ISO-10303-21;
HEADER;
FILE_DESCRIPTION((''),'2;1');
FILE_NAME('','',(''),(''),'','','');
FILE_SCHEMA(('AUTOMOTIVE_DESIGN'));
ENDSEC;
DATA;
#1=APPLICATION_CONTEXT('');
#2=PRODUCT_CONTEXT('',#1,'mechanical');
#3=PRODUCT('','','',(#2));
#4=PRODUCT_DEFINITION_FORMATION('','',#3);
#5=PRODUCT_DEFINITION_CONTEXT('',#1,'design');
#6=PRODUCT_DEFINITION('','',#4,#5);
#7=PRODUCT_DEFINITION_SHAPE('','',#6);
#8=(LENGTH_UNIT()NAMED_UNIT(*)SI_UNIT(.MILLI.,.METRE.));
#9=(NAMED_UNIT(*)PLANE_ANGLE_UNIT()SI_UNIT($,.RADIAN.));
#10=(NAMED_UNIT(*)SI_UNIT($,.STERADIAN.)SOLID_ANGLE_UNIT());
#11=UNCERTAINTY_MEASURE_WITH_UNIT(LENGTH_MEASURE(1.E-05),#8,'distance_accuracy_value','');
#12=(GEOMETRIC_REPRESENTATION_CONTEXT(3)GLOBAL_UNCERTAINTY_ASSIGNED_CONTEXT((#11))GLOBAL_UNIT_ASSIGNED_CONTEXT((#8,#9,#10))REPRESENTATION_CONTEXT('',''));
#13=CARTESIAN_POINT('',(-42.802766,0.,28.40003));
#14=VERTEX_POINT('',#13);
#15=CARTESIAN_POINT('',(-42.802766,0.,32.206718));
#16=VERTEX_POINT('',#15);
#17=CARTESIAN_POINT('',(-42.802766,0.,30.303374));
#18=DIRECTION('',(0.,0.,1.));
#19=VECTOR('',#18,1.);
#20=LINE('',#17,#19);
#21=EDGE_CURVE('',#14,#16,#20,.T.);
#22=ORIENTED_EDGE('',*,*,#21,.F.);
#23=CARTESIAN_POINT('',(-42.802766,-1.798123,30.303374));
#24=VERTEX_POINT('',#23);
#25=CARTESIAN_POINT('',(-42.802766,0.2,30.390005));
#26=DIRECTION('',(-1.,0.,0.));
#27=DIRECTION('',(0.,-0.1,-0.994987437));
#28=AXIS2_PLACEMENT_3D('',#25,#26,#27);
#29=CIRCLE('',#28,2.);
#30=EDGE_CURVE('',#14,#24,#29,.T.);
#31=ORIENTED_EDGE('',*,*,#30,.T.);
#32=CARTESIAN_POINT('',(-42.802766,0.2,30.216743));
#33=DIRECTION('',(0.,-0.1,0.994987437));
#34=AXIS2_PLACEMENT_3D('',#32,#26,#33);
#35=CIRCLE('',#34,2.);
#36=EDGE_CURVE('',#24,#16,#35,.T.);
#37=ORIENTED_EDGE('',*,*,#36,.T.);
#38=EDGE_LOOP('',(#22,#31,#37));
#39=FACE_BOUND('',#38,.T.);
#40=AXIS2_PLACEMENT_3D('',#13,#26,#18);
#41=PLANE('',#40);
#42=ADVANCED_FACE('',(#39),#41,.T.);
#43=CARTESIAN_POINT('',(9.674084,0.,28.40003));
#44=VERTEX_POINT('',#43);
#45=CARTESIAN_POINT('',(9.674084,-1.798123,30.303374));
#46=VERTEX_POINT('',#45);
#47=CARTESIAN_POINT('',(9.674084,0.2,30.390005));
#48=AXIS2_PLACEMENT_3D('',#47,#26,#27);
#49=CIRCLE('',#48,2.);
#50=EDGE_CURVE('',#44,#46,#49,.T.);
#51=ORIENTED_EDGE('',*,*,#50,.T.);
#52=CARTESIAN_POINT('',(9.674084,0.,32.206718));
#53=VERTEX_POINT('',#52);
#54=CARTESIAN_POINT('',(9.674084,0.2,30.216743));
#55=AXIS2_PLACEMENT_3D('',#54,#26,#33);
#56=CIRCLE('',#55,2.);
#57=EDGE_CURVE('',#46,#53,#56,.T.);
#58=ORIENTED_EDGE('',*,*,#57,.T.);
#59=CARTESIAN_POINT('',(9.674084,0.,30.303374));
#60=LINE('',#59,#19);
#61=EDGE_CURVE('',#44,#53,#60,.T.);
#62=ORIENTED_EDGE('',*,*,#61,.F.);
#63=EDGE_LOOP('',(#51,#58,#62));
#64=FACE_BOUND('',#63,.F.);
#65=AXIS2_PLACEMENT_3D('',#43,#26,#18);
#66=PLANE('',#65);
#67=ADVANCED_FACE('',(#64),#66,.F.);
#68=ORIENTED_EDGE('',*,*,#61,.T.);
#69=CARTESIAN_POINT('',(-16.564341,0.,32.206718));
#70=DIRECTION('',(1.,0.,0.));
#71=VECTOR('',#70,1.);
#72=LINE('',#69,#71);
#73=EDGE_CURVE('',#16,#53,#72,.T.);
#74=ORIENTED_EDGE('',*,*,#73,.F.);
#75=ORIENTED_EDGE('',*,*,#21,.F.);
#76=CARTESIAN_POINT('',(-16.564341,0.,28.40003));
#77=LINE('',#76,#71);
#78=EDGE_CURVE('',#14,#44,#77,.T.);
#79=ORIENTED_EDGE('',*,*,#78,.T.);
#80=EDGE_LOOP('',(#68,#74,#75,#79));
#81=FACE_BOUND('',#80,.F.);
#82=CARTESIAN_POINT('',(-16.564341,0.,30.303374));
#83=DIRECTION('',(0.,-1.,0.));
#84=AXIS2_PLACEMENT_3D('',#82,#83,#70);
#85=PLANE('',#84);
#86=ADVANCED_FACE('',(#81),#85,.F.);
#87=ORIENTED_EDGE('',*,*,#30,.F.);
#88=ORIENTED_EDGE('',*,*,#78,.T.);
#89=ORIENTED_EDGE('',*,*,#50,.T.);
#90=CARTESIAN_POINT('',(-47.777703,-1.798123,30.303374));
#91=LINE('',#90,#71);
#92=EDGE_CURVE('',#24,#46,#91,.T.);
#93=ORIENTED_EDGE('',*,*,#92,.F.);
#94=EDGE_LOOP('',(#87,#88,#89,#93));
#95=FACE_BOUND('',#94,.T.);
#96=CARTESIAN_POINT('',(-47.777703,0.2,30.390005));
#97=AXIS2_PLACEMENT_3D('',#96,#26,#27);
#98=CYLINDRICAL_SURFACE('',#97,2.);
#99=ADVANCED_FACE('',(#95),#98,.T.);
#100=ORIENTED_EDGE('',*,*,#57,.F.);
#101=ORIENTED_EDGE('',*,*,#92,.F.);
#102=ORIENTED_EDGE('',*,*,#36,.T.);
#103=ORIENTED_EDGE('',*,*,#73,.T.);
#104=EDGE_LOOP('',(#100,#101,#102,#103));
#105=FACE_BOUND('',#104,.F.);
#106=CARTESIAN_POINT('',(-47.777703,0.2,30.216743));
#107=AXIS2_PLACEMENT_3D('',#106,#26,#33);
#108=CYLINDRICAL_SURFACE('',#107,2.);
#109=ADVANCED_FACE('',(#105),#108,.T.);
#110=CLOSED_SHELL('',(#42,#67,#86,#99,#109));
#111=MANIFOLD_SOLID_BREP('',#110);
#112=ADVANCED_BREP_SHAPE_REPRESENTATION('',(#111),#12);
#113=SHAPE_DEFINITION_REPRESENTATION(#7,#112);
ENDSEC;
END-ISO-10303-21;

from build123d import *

# Parameters (mm, degrees)
F0_W        = 52.4768503383
F0_H        = 3.8066878915
F1_DEPTH    = 1.8
F2_T1_DEPTH = 62.4267247093


# Not quite as in the source:
# - a fillet or chamfer that OpenCascade refuses, or shapes differently, is made with other operations: its cross-section is extruded or revolved along the edge and cut away or added


with BuildPart() as f1:
    # F0 (on Front) → F1 (new body)
    with BuildSketch(Plane.XZ):
        with Locations((-16.5643407963, 30.3033739328)):
            Rectangle(F0_W, F0_H)
    extrude(amount=F1_DEPTH)

    # F2: fillet of radius 2 on 2 edges, made by hand

    # F2_s2 → F2_t1 (cut)
    with BuildSketch(Plane.YZ.offset(-47.777703151)):
        with BuildLine():
            ThreePointArc((0, 32.2067178786), (-1.2832396974, 31.5583837909), (-1.8, 30.2167430044))
            Line((-1.8, 30.2167430044), (-1.8, 32.2067178786))
            Line((-1.8, 32.2067178786), (0, 32.2067178786))
        make_face()
        with BuildLine():
            ThreePointArc((0, 28.4000299871), (-1.2832396974, 29.0483640748), (-1.8, 30.3900048613))
            Line((-1.8, 30.3900048613), (-1.8, 28.4000299871))
            Line((-1.8, 28.4000299871), (0, 28.4000299871))
        make_face()
    extrude(amount=F2_T1_DEPTH, mode=Mode.SUBTRACT)


solid = f1.part
